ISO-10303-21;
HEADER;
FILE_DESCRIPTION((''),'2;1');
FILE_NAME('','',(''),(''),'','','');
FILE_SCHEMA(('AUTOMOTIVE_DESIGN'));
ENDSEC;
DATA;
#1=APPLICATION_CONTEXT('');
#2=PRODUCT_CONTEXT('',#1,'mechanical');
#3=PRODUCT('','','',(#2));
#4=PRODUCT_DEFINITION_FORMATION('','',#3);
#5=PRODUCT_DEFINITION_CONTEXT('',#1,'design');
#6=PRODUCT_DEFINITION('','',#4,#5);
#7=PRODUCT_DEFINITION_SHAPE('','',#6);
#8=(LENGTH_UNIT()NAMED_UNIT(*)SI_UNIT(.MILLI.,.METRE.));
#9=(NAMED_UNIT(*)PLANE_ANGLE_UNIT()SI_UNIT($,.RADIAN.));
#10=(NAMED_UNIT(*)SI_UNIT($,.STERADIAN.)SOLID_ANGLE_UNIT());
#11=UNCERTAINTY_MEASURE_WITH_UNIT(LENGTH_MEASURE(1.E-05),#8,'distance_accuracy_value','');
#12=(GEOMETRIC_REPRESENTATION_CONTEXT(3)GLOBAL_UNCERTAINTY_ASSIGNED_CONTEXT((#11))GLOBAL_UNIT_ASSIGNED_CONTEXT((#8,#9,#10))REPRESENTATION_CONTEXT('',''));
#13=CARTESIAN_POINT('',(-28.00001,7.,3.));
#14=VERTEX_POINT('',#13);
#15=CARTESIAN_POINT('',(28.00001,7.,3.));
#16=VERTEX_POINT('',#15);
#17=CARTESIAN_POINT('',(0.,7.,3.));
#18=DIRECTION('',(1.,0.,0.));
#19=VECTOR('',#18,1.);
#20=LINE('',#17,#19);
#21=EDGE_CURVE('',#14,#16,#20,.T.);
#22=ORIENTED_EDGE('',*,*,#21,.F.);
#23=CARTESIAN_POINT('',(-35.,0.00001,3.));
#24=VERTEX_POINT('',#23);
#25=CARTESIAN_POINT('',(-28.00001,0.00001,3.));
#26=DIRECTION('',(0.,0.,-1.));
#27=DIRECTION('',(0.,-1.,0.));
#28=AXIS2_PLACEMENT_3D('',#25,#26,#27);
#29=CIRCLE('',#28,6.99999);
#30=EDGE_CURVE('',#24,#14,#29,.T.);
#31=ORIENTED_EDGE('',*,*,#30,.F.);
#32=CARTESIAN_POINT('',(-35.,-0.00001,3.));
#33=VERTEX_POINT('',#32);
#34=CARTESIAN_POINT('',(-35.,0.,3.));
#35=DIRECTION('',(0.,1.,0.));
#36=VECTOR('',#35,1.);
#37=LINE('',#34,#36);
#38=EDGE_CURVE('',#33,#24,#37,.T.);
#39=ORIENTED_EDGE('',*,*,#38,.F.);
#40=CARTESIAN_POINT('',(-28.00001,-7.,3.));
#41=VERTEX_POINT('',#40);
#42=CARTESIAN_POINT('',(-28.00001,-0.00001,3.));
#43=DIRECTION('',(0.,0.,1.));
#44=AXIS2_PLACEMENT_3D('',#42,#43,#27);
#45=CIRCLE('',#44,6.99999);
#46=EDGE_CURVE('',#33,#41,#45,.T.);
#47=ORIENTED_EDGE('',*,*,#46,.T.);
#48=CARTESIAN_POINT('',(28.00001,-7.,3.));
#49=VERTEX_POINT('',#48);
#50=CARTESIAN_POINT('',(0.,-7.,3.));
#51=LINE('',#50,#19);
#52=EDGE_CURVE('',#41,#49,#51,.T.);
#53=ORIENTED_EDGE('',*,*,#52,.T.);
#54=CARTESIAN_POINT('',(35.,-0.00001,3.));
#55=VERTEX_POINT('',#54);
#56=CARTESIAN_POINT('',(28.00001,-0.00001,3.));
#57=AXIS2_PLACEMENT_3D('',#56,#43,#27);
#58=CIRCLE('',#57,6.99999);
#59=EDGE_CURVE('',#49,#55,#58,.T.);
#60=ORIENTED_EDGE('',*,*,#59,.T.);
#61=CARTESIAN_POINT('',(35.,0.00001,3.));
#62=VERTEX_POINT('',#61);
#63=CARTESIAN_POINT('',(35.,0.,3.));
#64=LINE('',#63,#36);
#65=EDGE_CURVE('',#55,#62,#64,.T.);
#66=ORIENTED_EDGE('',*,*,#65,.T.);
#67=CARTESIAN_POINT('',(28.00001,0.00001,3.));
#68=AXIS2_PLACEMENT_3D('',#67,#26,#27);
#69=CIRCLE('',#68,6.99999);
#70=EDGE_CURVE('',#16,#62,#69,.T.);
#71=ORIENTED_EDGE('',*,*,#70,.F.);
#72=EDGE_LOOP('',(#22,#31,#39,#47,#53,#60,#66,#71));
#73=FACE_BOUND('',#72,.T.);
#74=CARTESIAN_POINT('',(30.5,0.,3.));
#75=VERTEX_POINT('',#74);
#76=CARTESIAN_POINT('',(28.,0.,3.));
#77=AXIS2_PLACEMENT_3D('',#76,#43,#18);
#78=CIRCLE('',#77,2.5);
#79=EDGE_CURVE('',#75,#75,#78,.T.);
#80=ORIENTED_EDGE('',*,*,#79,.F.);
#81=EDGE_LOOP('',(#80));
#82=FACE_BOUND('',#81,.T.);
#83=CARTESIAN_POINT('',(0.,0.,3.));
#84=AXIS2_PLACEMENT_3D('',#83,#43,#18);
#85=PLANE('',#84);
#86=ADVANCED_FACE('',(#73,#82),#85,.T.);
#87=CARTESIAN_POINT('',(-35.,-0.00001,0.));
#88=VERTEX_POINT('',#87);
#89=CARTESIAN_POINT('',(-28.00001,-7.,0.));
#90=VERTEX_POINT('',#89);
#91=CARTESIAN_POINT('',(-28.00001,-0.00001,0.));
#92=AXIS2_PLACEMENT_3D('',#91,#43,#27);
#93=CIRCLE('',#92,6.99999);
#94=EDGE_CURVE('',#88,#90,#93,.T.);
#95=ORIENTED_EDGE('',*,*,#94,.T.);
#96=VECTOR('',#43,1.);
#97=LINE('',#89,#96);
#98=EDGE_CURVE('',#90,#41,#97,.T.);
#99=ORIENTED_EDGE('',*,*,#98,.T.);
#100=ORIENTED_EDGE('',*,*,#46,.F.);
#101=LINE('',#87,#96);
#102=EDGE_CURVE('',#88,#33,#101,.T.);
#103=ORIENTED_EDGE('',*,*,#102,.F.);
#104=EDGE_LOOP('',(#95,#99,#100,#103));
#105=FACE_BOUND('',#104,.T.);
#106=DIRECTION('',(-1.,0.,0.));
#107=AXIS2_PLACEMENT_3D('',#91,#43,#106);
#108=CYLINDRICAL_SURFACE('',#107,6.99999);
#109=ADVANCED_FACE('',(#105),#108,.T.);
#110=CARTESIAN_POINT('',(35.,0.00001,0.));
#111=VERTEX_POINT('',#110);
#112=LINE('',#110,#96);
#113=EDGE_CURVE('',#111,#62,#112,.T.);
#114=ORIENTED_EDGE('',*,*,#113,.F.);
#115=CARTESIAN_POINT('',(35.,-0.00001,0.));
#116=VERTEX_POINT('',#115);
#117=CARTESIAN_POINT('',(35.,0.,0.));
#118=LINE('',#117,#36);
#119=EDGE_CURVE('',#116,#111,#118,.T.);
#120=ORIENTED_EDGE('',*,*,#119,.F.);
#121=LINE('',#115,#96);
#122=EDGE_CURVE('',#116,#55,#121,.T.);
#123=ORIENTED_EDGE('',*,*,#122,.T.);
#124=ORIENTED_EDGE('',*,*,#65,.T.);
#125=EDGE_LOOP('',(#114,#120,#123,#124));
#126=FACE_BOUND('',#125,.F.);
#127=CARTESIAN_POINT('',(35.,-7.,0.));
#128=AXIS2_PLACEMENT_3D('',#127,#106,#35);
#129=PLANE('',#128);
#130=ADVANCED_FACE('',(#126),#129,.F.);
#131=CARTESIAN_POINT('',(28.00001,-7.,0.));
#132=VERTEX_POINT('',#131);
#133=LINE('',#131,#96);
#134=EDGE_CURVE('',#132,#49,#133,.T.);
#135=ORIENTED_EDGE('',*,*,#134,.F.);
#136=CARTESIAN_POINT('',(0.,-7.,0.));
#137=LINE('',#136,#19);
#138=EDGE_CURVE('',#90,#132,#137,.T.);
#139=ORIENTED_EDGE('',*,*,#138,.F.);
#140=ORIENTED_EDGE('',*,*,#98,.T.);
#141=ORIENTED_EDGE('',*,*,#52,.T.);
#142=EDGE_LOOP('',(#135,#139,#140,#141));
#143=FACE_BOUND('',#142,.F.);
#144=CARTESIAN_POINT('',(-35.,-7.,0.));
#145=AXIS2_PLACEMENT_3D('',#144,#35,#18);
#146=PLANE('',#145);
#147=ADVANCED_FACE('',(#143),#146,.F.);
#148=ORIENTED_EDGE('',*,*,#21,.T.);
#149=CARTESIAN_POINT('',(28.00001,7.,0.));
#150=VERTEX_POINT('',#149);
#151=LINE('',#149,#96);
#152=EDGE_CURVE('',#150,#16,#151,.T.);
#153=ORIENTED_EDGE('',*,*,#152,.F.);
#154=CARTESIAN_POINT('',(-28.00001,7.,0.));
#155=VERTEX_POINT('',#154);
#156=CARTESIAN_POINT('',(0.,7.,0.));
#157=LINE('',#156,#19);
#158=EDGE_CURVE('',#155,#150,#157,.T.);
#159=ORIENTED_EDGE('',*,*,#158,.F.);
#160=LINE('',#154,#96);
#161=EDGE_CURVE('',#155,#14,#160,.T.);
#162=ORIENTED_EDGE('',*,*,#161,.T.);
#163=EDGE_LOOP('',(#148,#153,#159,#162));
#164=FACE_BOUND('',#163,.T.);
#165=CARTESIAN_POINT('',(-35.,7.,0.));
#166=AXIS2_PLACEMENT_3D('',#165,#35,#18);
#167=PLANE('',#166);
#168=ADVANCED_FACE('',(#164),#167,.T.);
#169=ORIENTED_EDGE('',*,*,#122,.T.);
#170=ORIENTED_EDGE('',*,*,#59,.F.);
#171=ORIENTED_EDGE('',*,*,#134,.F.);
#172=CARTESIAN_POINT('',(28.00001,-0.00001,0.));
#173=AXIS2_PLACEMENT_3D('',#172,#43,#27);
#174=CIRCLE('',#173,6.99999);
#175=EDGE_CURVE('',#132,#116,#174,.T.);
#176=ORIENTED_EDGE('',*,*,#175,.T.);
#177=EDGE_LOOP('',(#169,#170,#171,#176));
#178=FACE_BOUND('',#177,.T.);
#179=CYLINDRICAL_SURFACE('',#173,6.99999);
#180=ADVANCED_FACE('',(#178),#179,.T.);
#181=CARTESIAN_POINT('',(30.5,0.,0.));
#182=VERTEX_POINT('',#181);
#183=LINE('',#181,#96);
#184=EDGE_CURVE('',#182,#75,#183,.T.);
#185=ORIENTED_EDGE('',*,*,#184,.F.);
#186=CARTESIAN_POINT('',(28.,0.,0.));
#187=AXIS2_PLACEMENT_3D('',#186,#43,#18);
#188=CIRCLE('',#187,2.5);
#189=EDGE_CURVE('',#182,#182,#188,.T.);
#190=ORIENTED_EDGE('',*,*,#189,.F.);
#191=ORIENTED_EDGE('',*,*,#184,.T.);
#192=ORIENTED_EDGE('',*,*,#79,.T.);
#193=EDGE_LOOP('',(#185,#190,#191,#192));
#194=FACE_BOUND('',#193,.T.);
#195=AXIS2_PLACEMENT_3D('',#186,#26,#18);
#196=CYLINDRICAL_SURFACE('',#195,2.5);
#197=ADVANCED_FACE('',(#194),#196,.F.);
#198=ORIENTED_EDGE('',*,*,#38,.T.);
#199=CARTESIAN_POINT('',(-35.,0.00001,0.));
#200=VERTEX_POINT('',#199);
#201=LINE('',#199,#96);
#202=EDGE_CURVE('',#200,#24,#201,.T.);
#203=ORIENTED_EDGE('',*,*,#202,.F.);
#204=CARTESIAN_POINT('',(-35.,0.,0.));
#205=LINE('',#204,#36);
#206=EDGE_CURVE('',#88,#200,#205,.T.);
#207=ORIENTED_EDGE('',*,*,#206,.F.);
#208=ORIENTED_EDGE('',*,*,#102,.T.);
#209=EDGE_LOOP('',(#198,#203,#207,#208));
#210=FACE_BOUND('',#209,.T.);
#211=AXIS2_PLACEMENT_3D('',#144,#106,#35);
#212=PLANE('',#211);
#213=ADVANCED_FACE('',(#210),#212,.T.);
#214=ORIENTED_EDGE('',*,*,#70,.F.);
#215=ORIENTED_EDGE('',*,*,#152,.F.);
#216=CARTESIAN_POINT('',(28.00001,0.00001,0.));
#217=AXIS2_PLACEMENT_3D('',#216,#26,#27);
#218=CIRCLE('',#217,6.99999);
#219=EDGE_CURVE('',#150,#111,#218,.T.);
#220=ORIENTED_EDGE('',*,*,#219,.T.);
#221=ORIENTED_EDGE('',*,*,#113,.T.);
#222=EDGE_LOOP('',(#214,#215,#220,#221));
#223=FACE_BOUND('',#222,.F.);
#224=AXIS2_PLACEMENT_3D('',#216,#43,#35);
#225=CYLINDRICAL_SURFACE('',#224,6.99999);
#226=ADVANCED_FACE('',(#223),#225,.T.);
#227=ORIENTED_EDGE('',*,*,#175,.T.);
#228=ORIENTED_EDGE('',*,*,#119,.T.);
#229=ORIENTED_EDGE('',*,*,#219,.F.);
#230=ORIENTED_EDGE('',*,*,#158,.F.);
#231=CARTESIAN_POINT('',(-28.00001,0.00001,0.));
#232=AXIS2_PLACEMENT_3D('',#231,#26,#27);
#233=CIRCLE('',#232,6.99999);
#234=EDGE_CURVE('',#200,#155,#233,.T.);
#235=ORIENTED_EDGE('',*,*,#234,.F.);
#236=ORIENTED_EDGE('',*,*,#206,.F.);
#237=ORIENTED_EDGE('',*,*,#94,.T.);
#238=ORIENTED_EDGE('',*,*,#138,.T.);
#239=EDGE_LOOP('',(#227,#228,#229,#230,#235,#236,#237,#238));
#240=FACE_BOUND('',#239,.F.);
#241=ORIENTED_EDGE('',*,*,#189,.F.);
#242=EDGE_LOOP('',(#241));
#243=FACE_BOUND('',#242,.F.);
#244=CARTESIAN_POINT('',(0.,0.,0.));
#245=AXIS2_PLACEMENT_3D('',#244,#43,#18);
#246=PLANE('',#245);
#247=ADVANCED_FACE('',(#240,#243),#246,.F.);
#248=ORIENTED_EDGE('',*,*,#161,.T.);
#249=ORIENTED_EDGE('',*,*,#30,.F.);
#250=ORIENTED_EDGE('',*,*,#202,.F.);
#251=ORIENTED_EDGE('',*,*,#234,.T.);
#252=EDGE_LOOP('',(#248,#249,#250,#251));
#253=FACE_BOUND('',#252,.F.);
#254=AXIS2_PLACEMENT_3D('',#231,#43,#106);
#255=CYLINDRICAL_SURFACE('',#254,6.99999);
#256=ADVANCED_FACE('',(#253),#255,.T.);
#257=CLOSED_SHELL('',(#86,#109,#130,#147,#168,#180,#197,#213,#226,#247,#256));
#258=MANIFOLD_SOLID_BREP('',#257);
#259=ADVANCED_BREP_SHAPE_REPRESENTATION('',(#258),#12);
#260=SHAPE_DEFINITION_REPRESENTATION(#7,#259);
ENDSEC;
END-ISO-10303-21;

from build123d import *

# Parameters (mm, degrees)
F0_W     = 70
F0_H     = 14
F0_R     = 2.5
F1_DEPTH = 3
F2_R     = 6.99999


# Not quite as in the source:
# - a fillet or chamfer is up to 0.001 mm smaller than in the source, because OpenCascade refuses the exact size


with BuildPart() as f1:
    # F0 (on Top) → F1 (new body)
    with BuildSketch(Plane.XY):
        Rectangle(F0_W, F0_H)
        with Locations((28, 0)):
            Circle(F0_R, mode=Mode.SUBTRACT)
    extrude(amount=F1_DEPTH)

    # F2 (radius 7 in the source; OpenCascade refuses exactly that, so slightly less here)
    f2_edges = [f1.edges().sort_by_distance(p)[0] for p in [
        (35, 7, 1.5),
        (35, -7, 1.5),
        (-35, -7, 1.5),
        (-35, 7, 1.5),
    ]]
    fillet(f2_edges, radius=F2_R)


solid = f1.part
